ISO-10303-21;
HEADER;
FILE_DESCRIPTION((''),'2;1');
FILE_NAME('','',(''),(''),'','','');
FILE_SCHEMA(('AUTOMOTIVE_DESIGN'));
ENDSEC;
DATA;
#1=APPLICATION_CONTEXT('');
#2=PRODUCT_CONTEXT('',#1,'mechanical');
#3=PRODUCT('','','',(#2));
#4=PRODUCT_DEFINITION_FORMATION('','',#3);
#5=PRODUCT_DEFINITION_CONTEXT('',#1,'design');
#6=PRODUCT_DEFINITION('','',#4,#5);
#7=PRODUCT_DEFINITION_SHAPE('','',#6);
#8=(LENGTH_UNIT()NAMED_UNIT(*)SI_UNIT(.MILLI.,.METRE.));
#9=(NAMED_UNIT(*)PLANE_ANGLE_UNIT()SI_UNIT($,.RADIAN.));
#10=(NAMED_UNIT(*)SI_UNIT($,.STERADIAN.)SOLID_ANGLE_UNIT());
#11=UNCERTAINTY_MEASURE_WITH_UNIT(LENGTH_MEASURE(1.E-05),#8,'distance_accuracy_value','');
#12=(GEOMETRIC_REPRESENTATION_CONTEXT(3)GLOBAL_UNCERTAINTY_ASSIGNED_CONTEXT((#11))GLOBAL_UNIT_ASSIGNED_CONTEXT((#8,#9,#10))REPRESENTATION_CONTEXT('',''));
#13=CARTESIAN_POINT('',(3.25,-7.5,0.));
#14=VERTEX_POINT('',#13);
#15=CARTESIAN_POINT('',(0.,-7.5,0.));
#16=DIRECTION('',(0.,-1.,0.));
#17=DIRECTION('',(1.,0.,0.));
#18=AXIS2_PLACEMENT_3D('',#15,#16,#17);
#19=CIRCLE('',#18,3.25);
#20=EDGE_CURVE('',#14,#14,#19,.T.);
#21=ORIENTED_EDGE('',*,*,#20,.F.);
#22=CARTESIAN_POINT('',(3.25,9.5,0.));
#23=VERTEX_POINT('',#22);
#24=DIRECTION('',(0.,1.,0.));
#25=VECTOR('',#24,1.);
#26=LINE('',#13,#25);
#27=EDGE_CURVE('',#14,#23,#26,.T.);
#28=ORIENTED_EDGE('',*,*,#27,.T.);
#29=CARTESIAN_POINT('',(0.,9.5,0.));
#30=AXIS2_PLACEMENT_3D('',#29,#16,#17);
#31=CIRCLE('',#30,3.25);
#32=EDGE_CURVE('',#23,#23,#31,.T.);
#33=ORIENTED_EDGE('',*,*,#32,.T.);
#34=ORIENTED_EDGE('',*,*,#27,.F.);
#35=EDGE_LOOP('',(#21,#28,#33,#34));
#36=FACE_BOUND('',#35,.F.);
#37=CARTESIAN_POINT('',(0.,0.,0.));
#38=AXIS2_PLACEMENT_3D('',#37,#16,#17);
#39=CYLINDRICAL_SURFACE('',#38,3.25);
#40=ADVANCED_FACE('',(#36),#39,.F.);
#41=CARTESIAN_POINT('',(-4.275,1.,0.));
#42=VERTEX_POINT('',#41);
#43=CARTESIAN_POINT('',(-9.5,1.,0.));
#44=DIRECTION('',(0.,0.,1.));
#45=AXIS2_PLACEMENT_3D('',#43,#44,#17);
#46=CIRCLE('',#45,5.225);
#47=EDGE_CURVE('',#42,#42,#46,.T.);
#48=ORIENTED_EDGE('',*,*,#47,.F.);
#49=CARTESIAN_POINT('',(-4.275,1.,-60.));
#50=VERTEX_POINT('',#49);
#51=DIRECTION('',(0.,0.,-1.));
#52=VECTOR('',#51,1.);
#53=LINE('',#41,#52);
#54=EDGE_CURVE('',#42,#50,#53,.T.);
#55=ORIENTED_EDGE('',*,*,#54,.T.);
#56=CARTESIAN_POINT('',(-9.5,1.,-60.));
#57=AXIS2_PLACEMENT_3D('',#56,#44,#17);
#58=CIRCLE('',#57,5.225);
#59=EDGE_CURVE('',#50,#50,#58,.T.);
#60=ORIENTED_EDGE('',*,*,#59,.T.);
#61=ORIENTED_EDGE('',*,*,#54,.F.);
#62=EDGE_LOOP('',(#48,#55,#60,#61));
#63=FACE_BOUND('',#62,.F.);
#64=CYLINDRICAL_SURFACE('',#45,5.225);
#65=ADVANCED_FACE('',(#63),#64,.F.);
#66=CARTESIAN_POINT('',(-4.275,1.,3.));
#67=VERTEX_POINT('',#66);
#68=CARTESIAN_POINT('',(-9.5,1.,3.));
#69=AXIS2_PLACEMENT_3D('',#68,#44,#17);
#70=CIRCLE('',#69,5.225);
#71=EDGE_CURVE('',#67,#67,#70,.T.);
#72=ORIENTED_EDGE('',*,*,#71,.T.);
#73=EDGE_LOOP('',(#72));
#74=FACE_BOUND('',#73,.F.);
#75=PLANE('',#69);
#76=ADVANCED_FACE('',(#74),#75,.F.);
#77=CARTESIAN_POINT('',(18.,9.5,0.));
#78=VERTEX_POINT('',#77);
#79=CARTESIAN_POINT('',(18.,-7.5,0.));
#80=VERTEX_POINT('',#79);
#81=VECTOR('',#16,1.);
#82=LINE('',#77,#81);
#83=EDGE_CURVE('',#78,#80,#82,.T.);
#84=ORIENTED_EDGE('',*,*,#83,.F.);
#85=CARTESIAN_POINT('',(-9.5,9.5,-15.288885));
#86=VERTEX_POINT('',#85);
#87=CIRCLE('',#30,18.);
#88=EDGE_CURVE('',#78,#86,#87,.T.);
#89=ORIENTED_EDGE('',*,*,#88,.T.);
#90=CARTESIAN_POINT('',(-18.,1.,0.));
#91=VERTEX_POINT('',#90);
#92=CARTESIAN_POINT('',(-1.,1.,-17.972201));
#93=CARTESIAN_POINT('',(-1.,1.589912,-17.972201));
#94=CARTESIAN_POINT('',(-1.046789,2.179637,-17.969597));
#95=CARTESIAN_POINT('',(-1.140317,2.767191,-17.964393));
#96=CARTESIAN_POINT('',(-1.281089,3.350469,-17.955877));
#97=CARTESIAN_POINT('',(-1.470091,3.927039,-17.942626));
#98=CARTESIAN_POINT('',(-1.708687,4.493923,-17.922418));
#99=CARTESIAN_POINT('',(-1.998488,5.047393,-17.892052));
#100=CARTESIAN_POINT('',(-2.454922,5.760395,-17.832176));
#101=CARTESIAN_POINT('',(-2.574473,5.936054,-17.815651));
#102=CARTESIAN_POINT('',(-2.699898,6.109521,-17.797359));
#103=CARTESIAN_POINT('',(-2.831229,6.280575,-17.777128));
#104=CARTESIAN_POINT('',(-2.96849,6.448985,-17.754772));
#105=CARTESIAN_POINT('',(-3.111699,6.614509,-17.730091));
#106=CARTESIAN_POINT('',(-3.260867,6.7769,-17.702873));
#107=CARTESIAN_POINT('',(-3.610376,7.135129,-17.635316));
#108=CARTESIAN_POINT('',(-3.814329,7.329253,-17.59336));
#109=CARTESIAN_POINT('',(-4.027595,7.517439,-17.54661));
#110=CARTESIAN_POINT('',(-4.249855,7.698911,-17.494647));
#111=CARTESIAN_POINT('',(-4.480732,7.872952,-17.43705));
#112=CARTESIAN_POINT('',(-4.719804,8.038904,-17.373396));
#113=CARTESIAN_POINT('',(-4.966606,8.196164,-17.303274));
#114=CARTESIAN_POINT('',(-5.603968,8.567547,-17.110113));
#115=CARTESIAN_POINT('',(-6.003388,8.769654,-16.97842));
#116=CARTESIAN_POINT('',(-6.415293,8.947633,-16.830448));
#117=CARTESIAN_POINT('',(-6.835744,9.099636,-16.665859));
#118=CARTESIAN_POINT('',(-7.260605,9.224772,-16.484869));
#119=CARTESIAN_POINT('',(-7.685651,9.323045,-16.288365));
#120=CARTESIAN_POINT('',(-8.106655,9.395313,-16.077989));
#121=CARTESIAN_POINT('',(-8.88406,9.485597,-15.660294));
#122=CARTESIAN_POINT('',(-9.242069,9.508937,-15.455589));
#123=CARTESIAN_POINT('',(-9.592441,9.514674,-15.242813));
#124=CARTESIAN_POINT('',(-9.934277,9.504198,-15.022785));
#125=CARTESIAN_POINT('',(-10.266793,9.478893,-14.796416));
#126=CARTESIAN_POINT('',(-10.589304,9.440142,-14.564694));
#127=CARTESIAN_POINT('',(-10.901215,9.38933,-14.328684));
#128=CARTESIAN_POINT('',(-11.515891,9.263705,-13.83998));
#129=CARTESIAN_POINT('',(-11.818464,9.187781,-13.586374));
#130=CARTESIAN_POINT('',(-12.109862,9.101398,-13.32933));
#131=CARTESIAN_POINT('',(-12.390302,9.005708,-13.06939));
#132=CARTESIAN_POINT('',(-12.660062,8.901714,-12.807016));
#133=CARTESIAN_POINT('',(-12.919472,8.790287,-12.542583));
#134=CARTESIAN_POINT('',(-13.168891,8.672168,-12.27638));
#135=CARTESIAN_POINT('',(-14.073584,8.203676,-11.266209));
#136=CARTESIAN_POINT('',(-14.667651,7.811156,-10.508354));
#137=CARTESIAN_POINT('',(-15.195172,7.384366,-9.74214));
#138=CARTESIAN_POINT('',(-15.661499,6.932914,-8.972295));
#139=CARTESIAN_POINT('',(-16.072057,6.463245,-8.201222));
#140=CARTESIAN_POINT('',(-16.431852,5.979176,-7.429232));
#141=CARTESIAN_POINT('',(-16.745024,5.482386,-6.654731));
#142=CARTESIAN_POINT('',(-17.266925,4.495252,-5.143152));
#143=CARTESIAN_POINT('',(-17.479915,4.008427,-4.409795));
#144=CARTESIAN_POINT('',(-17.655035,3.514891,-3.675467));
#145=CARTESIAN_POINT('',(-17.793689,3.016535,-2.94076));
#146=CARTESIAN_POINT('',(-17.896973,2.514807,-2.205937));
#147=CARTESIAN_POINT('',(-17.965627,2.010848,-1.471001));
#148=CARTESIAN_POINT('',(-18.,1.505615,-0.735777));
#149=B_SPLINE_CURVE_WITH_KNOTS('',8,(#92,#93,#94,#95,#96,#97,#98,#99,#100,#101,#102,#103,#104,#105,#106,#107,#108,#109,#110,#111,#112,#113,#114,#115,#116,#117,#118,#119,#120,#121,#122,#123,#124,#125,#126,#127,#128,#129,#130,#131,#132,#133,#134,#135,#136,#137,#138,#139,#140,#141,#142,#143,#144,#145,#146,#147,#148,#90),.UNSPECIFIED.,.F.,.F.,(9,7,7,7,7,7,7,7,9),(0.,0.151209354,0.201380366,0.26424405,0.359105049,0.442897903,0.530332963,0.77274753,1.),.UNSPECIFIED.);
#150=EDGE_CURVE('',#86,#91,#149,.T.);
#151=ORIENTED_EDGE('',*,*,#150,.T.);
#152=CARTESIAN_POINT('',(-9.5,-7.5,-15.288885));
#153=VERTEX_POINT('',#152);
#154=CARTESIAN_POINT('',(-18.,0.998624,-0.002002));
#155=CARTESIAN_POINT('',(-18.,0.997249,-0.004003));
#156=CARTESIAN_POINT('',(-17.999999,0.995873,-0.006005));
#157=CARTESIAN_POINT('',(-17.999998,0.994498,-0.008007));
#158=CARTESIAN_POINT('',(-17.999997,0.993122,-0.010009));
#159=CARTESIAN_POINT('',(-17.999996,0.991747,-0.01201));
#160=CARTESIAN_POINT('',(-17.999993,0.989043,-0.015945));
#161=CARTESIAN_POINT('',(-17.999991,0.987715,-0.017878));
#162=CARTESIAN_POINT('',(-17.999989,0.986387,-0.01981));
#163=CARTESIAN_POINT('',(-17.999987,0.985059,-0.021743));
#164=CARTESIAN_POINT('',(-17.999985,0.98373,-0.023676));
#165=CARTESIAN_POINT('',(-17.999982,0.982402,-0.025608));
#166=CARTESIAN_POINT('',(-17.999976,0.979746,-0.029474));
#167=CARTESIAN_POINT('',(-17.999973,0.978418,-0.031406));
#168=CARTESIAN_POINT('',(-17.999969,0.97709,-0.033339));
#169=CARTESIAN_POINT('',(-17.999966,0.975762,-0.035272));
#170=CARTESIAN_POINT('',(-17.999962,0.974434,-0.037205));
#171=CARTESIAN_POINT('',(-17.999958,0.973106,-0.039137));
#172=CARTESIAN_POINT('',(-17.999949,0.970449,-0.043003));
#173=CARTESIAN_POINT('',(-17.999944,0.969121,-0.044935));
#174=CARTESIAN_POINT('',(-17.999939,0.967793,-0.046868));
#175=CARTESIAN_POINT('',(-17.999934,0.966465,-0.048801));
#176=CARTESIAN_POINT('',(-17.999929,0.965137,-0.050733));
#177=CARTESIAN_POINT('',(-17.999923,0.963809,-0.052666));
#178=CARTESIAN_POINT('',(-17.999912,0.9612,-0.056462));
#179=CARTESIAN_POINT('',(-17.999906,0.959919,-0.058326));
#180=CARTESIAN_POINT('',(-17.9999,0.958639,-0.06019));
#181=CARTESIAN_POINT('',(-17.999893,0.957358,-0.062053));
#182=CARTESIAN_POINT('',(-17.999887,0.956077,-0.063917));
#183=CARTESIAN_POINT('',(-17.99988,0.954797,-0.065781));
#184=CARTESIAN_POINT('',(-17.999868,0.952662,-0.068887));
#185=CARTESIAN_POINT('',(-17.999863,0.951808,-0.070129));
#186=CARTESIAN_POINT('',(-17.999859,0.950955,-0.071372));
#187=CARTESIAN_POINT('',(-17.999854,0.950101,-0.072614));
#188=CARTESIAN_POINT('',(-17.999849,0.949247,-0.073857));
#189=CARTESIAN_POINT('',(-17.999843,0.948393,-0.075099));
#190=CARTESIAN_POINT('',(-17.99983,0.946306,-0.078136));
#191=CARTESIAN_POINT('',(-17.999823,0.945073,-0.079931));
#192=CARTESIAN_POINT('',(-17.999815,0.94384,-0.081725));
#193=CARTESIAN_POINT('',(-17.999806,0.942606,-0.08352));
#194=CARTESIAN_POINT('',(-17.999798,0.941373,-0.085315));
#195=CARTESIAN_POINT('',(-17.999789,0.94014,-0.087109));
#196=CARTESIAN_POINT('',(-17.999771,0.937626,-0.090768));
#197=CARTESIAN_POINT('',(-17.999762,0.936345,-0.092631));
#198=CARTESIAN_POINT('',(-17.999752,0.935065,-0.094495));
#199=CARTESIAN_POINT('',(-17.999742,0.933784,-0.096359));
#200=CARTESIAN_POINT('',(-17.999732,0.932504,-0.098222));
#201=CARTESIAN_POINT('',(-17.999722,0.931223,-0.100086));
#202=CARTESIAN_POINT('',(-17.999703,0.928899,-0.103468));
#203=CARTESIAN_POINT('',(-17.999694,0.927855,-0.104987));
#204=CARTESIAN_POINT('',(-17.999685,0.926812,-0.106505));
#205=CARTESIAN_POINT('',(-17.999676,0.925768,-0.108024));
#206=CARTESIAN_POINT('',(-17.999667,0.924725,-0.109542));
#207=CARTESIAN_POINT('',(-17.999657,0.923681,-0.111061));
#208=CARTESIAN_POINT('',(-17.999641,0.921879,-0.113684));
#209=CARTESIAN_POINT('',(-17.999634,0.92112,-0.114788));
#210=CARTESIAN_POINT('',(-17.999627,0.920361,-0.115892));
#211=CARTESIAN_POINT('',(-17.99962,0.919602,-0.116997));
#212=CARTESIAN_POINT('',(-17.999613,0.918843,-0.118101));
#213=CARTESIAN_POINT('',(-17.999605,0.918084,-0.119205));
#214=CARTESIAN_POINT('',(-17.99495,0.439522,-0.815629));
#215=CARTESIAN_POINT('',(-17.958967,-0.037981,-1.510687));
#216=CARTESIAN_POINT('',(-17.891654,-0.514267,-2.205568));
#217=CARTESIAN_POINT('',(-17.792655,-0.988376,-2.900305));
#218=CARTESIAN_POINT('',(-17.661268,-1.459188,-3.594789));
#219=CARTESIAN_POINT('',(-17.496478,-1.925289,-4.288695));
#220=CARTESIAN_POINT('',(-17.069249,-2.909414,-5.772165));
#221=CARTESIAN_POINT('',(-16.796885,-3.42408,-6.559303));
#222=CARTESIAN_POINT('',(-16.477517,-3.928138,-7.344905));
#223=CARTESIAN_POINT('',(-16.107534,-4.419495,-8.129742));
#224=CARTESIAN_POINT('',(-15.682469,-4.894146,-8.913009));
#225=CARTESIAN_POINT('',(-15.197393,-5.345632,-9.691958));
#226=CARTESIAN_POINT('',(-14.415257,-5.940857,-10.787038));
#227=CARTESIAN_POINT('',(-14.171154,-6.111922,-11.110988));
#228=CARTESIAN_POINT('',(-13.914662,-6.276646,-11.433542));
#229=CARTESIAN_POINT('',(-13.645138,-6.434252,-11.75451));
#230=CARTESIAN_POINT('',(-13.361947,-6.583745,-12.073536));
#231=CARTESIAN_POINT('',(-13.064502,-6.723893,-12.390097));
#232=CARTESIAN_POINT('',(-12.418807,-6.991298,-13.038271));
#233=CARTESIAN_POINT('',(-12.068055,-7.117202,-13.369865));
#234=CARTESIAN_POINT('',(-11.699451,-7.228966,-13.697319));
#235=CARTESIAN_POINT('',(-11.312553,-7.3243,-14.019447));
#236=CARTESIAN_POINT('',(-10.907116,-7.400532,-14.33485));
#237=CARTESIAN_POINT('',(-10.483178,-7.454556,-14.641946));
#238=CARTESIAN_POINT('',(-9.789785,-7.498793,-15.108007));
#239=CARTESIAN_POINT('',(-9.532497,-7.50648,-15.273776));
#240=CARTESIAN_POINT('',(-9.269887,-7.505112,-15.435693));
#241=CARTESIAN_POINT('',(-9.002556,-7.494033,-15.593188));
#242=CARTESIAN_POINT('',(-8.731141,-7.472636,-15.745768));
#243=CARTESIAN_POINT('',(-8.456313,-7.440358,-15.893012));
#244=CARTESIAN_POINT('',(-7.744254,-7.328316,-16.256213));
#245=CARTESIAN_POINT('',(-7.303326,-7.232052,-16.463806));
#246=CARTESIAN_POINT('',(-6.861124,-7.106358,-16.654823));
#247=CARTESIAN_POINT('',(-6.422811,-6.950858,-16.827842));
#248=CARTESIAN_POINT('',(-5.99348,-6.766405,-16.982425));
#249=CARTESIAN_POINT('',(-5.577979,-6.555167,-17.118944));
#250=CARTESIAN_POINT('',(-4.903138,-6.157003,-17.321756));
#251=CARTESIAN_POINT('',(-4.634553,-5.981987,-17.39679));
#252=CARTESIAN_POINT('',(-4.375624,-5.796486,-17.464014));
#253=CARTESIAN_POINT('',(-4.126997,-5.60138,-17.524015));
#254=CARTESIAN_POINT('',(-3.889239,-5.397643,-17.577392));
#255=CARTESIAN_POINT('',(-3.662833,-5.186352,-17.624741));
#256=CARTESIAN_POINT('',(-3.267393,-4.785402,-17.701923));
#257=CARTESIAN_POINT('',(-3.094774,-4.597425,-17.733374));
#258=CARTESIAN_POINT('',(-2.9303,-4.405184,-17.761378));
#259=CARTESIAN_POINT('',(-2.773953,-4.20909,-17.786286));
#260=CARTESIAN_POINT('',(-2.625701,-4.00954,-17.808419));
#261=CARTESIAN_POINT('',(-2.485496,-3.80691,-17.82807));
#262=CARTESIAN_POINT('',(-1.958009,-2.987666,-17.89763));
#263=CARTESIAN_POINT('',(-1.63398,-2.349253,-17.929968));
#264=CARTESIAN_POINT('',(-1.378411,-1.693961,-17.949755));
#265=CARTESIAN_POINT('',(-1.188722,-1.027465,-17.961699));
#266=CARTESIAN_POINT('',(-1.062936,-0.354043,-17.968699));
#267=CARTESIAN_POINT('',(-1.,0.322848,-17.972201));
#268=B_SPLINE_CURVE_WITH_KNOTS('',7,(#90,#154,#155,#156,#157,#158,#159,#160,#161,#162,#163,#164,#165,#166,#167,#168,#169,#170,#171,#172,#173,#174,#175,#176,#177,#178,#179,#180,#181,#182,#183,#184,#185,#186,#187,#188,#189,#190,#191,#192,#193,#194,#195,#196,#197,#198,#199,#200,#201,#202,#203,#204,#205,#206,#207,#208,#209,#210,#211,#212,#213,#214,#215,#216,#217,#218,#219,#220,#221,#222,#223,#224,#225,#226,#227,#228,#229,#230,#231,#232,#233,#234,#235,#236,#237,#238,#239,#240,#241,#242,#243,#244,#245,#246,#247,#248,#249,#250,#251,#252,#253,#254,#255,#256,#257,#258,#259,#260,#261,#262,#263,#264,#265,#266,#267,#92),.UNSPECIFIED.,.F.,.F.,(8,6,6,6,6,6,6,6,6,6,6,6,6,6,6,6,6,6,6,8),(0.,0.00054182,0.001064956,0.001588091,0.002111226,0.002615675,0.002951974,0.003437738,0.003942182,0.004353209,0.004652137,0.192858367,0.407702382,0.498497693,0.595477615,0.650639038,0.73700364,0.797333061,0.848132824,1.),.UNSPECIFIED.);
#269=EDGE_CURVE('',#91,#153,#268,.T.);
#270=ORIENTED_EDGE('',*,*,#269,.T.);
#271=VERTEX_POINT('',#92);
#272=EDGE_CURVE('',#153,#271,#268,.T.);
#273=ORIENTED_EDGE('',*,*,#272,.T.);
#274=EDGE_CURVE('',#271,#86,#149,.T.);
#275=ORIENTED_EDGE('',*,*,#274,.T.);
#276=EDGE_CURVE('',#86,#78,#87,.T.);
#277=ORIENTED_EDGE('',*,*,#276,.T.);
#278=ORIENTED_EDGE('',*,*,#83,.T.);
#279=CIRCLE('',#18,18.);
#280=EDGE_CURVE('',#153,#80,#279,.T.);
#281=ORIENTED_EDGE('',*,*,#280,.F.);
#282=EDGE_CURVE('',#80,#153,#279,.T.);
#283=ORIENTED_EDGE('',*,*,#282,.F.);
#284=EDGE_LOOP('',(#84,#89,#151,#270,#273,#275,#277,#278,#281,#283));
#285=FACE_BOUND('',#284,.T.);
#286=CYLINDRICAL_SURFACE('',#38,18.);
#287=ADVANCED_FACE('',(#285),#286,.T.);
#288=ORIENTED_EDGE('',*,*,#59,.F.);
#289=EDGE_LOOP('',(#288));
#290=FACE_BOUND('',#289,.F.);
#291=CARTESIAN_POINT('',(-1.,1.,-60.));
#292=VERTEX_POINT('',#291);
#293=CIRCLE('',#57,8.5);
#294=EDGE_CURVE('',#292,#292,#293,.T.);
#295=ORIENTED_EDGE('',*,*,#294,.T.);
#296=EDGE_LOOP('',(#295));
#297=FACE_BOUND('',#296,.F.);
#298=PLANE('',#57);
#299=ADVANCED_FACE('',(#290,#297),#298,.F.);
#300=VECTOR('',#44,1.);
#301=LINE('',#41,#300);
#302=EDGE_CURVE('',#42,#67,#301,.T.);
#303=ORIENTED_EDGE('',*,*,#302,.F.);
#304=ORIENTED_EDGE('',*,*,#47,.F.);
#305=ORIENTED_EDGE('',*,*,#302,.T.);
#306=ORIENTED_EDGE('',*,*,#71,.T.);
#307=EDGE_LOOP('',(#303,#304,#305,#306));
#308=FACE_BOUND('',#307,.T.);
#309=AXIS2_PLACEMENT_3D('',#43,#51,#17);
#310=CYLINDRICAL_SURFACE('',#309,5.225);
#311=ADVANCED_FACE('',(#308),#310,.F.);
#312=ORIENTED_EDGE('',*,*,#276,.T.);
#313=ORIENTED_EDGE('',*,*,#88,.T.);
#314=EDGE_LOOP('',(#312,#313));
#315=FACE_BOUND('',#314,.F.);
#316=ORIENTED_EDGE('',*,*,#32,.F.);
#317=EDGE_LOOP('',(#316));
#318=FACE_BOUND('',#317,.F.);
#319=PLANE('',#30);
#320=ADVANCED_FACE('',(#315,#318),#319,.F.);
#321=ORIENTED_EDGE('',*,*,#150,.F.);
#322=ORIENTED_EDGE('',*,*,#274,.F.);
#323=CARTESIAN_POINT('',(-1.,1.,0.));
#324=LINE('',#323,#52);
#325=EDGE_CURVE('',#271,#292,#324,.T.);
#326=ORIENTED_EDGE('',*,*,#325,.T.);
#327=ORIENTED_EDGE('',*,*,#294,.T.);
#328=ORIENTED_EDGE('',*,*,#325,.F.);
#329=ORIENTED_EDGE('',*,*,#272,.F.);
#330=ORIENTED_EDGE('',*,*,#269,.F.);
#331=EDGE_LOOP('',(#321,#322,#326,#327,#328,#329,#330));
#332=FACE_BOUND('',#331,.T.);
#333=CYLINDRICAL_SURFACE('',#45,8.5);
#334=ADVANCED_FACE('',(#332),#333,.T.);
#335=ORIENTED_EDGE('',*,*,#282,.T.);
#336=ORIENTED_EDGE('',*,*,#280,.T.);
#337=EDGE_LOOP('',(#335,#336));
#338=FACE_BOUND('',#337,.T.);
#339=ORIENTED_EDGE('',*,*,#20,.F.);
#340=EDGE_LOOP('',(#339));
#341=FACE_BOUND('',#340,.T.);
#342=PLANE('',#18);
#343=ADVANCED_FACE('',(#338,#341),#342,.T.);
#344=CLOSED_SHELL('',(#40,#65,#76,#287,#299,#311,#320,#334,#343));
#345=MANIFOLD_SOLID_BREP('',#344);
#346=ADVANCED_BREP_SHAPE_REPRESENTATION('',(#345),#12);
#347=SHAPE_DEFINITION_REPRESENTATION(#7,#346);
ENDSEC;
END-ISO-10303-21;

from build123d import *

# Parameters (mm, degrees)
F1_R          = 18
F1_R_2        = 3.25
F2_DEPTH      = 7.5
F2_DEPTH_BACK = 9.5
F3_R          = 8.5
F3_R_2        = 5.225
F4_DEPTH      = 60
F5_DEPTH      = 60.0010001
F5_DEPTH_BACK = 3
F6_DEPTH      = 7.5010001009
F6_DEPTH_BACK = 9.5010001
F8_DEPTH      = 50


# Not quite as in the source:
# - a feature of the source that left no trace in its solid (it failed there, or was rolled back) is left out


with BuildPart() as f2:
    # F1 (on Front) → F2 (new body, two sides)
    with BuildSketch(Plane.XZ) as f2_sk:
        Circle(F1_R)
        Circle(F1_R_2, mode=Mode.SUBTRACT)
    extrude(amount=F2_DEPTH)
    extrude(f2_sk.sketch, amount=-F2_DEPTH_BACK)

    # F3 (on Top) → F4 (join)
    with BuildSketch(Plane.XY):
        with Locations((-9.5, 1)):
            Circle(F3_R)
        with Locations((-9.5, 1)):
            Circle(F3_R_2, mode=Mode.SUBTRACT)
        with Locations((-9.5, 1)):
            Circle(F3_R_2)
    extrude(amount=-F4_DEPTH)

    # F3 (on Top) → F5 (cut, two sides)
    with BuildSketch(Plane.XY) as f5_sk:
        with Locations((-9.5, 1)):
            Circle(F3_R_2)
    extrude(amount=-F5_DEPTH, mode=Mode.SUBTRACT)
    extrude(f5_sk.sketch, amount=F5_DEPTH_BACK, mode=Mode.SUBTRACT)

    # F1 (on Front) → F6 (cut, two sides)
    with BuildSketch(Plane.XZ) as f6_sk:
        Circle(F1_R_2)
    extrude(amount=F6_DEPTH, mode=Mode.SUBTRACT)
    extrude(f6_sk.sketch, amount=-F6_DEPTH_BACK, mode=Mode.SUBTRACT)

    # F1 (on Front) → F8 (cut, symmetric)
    with BuildSketch(Plane.XZ):
        Circle(F1_R_2)
    extrude(amount=F8_DEPTH, both=True, mode=Mode.SUBTRACT)


solid = f2.part
